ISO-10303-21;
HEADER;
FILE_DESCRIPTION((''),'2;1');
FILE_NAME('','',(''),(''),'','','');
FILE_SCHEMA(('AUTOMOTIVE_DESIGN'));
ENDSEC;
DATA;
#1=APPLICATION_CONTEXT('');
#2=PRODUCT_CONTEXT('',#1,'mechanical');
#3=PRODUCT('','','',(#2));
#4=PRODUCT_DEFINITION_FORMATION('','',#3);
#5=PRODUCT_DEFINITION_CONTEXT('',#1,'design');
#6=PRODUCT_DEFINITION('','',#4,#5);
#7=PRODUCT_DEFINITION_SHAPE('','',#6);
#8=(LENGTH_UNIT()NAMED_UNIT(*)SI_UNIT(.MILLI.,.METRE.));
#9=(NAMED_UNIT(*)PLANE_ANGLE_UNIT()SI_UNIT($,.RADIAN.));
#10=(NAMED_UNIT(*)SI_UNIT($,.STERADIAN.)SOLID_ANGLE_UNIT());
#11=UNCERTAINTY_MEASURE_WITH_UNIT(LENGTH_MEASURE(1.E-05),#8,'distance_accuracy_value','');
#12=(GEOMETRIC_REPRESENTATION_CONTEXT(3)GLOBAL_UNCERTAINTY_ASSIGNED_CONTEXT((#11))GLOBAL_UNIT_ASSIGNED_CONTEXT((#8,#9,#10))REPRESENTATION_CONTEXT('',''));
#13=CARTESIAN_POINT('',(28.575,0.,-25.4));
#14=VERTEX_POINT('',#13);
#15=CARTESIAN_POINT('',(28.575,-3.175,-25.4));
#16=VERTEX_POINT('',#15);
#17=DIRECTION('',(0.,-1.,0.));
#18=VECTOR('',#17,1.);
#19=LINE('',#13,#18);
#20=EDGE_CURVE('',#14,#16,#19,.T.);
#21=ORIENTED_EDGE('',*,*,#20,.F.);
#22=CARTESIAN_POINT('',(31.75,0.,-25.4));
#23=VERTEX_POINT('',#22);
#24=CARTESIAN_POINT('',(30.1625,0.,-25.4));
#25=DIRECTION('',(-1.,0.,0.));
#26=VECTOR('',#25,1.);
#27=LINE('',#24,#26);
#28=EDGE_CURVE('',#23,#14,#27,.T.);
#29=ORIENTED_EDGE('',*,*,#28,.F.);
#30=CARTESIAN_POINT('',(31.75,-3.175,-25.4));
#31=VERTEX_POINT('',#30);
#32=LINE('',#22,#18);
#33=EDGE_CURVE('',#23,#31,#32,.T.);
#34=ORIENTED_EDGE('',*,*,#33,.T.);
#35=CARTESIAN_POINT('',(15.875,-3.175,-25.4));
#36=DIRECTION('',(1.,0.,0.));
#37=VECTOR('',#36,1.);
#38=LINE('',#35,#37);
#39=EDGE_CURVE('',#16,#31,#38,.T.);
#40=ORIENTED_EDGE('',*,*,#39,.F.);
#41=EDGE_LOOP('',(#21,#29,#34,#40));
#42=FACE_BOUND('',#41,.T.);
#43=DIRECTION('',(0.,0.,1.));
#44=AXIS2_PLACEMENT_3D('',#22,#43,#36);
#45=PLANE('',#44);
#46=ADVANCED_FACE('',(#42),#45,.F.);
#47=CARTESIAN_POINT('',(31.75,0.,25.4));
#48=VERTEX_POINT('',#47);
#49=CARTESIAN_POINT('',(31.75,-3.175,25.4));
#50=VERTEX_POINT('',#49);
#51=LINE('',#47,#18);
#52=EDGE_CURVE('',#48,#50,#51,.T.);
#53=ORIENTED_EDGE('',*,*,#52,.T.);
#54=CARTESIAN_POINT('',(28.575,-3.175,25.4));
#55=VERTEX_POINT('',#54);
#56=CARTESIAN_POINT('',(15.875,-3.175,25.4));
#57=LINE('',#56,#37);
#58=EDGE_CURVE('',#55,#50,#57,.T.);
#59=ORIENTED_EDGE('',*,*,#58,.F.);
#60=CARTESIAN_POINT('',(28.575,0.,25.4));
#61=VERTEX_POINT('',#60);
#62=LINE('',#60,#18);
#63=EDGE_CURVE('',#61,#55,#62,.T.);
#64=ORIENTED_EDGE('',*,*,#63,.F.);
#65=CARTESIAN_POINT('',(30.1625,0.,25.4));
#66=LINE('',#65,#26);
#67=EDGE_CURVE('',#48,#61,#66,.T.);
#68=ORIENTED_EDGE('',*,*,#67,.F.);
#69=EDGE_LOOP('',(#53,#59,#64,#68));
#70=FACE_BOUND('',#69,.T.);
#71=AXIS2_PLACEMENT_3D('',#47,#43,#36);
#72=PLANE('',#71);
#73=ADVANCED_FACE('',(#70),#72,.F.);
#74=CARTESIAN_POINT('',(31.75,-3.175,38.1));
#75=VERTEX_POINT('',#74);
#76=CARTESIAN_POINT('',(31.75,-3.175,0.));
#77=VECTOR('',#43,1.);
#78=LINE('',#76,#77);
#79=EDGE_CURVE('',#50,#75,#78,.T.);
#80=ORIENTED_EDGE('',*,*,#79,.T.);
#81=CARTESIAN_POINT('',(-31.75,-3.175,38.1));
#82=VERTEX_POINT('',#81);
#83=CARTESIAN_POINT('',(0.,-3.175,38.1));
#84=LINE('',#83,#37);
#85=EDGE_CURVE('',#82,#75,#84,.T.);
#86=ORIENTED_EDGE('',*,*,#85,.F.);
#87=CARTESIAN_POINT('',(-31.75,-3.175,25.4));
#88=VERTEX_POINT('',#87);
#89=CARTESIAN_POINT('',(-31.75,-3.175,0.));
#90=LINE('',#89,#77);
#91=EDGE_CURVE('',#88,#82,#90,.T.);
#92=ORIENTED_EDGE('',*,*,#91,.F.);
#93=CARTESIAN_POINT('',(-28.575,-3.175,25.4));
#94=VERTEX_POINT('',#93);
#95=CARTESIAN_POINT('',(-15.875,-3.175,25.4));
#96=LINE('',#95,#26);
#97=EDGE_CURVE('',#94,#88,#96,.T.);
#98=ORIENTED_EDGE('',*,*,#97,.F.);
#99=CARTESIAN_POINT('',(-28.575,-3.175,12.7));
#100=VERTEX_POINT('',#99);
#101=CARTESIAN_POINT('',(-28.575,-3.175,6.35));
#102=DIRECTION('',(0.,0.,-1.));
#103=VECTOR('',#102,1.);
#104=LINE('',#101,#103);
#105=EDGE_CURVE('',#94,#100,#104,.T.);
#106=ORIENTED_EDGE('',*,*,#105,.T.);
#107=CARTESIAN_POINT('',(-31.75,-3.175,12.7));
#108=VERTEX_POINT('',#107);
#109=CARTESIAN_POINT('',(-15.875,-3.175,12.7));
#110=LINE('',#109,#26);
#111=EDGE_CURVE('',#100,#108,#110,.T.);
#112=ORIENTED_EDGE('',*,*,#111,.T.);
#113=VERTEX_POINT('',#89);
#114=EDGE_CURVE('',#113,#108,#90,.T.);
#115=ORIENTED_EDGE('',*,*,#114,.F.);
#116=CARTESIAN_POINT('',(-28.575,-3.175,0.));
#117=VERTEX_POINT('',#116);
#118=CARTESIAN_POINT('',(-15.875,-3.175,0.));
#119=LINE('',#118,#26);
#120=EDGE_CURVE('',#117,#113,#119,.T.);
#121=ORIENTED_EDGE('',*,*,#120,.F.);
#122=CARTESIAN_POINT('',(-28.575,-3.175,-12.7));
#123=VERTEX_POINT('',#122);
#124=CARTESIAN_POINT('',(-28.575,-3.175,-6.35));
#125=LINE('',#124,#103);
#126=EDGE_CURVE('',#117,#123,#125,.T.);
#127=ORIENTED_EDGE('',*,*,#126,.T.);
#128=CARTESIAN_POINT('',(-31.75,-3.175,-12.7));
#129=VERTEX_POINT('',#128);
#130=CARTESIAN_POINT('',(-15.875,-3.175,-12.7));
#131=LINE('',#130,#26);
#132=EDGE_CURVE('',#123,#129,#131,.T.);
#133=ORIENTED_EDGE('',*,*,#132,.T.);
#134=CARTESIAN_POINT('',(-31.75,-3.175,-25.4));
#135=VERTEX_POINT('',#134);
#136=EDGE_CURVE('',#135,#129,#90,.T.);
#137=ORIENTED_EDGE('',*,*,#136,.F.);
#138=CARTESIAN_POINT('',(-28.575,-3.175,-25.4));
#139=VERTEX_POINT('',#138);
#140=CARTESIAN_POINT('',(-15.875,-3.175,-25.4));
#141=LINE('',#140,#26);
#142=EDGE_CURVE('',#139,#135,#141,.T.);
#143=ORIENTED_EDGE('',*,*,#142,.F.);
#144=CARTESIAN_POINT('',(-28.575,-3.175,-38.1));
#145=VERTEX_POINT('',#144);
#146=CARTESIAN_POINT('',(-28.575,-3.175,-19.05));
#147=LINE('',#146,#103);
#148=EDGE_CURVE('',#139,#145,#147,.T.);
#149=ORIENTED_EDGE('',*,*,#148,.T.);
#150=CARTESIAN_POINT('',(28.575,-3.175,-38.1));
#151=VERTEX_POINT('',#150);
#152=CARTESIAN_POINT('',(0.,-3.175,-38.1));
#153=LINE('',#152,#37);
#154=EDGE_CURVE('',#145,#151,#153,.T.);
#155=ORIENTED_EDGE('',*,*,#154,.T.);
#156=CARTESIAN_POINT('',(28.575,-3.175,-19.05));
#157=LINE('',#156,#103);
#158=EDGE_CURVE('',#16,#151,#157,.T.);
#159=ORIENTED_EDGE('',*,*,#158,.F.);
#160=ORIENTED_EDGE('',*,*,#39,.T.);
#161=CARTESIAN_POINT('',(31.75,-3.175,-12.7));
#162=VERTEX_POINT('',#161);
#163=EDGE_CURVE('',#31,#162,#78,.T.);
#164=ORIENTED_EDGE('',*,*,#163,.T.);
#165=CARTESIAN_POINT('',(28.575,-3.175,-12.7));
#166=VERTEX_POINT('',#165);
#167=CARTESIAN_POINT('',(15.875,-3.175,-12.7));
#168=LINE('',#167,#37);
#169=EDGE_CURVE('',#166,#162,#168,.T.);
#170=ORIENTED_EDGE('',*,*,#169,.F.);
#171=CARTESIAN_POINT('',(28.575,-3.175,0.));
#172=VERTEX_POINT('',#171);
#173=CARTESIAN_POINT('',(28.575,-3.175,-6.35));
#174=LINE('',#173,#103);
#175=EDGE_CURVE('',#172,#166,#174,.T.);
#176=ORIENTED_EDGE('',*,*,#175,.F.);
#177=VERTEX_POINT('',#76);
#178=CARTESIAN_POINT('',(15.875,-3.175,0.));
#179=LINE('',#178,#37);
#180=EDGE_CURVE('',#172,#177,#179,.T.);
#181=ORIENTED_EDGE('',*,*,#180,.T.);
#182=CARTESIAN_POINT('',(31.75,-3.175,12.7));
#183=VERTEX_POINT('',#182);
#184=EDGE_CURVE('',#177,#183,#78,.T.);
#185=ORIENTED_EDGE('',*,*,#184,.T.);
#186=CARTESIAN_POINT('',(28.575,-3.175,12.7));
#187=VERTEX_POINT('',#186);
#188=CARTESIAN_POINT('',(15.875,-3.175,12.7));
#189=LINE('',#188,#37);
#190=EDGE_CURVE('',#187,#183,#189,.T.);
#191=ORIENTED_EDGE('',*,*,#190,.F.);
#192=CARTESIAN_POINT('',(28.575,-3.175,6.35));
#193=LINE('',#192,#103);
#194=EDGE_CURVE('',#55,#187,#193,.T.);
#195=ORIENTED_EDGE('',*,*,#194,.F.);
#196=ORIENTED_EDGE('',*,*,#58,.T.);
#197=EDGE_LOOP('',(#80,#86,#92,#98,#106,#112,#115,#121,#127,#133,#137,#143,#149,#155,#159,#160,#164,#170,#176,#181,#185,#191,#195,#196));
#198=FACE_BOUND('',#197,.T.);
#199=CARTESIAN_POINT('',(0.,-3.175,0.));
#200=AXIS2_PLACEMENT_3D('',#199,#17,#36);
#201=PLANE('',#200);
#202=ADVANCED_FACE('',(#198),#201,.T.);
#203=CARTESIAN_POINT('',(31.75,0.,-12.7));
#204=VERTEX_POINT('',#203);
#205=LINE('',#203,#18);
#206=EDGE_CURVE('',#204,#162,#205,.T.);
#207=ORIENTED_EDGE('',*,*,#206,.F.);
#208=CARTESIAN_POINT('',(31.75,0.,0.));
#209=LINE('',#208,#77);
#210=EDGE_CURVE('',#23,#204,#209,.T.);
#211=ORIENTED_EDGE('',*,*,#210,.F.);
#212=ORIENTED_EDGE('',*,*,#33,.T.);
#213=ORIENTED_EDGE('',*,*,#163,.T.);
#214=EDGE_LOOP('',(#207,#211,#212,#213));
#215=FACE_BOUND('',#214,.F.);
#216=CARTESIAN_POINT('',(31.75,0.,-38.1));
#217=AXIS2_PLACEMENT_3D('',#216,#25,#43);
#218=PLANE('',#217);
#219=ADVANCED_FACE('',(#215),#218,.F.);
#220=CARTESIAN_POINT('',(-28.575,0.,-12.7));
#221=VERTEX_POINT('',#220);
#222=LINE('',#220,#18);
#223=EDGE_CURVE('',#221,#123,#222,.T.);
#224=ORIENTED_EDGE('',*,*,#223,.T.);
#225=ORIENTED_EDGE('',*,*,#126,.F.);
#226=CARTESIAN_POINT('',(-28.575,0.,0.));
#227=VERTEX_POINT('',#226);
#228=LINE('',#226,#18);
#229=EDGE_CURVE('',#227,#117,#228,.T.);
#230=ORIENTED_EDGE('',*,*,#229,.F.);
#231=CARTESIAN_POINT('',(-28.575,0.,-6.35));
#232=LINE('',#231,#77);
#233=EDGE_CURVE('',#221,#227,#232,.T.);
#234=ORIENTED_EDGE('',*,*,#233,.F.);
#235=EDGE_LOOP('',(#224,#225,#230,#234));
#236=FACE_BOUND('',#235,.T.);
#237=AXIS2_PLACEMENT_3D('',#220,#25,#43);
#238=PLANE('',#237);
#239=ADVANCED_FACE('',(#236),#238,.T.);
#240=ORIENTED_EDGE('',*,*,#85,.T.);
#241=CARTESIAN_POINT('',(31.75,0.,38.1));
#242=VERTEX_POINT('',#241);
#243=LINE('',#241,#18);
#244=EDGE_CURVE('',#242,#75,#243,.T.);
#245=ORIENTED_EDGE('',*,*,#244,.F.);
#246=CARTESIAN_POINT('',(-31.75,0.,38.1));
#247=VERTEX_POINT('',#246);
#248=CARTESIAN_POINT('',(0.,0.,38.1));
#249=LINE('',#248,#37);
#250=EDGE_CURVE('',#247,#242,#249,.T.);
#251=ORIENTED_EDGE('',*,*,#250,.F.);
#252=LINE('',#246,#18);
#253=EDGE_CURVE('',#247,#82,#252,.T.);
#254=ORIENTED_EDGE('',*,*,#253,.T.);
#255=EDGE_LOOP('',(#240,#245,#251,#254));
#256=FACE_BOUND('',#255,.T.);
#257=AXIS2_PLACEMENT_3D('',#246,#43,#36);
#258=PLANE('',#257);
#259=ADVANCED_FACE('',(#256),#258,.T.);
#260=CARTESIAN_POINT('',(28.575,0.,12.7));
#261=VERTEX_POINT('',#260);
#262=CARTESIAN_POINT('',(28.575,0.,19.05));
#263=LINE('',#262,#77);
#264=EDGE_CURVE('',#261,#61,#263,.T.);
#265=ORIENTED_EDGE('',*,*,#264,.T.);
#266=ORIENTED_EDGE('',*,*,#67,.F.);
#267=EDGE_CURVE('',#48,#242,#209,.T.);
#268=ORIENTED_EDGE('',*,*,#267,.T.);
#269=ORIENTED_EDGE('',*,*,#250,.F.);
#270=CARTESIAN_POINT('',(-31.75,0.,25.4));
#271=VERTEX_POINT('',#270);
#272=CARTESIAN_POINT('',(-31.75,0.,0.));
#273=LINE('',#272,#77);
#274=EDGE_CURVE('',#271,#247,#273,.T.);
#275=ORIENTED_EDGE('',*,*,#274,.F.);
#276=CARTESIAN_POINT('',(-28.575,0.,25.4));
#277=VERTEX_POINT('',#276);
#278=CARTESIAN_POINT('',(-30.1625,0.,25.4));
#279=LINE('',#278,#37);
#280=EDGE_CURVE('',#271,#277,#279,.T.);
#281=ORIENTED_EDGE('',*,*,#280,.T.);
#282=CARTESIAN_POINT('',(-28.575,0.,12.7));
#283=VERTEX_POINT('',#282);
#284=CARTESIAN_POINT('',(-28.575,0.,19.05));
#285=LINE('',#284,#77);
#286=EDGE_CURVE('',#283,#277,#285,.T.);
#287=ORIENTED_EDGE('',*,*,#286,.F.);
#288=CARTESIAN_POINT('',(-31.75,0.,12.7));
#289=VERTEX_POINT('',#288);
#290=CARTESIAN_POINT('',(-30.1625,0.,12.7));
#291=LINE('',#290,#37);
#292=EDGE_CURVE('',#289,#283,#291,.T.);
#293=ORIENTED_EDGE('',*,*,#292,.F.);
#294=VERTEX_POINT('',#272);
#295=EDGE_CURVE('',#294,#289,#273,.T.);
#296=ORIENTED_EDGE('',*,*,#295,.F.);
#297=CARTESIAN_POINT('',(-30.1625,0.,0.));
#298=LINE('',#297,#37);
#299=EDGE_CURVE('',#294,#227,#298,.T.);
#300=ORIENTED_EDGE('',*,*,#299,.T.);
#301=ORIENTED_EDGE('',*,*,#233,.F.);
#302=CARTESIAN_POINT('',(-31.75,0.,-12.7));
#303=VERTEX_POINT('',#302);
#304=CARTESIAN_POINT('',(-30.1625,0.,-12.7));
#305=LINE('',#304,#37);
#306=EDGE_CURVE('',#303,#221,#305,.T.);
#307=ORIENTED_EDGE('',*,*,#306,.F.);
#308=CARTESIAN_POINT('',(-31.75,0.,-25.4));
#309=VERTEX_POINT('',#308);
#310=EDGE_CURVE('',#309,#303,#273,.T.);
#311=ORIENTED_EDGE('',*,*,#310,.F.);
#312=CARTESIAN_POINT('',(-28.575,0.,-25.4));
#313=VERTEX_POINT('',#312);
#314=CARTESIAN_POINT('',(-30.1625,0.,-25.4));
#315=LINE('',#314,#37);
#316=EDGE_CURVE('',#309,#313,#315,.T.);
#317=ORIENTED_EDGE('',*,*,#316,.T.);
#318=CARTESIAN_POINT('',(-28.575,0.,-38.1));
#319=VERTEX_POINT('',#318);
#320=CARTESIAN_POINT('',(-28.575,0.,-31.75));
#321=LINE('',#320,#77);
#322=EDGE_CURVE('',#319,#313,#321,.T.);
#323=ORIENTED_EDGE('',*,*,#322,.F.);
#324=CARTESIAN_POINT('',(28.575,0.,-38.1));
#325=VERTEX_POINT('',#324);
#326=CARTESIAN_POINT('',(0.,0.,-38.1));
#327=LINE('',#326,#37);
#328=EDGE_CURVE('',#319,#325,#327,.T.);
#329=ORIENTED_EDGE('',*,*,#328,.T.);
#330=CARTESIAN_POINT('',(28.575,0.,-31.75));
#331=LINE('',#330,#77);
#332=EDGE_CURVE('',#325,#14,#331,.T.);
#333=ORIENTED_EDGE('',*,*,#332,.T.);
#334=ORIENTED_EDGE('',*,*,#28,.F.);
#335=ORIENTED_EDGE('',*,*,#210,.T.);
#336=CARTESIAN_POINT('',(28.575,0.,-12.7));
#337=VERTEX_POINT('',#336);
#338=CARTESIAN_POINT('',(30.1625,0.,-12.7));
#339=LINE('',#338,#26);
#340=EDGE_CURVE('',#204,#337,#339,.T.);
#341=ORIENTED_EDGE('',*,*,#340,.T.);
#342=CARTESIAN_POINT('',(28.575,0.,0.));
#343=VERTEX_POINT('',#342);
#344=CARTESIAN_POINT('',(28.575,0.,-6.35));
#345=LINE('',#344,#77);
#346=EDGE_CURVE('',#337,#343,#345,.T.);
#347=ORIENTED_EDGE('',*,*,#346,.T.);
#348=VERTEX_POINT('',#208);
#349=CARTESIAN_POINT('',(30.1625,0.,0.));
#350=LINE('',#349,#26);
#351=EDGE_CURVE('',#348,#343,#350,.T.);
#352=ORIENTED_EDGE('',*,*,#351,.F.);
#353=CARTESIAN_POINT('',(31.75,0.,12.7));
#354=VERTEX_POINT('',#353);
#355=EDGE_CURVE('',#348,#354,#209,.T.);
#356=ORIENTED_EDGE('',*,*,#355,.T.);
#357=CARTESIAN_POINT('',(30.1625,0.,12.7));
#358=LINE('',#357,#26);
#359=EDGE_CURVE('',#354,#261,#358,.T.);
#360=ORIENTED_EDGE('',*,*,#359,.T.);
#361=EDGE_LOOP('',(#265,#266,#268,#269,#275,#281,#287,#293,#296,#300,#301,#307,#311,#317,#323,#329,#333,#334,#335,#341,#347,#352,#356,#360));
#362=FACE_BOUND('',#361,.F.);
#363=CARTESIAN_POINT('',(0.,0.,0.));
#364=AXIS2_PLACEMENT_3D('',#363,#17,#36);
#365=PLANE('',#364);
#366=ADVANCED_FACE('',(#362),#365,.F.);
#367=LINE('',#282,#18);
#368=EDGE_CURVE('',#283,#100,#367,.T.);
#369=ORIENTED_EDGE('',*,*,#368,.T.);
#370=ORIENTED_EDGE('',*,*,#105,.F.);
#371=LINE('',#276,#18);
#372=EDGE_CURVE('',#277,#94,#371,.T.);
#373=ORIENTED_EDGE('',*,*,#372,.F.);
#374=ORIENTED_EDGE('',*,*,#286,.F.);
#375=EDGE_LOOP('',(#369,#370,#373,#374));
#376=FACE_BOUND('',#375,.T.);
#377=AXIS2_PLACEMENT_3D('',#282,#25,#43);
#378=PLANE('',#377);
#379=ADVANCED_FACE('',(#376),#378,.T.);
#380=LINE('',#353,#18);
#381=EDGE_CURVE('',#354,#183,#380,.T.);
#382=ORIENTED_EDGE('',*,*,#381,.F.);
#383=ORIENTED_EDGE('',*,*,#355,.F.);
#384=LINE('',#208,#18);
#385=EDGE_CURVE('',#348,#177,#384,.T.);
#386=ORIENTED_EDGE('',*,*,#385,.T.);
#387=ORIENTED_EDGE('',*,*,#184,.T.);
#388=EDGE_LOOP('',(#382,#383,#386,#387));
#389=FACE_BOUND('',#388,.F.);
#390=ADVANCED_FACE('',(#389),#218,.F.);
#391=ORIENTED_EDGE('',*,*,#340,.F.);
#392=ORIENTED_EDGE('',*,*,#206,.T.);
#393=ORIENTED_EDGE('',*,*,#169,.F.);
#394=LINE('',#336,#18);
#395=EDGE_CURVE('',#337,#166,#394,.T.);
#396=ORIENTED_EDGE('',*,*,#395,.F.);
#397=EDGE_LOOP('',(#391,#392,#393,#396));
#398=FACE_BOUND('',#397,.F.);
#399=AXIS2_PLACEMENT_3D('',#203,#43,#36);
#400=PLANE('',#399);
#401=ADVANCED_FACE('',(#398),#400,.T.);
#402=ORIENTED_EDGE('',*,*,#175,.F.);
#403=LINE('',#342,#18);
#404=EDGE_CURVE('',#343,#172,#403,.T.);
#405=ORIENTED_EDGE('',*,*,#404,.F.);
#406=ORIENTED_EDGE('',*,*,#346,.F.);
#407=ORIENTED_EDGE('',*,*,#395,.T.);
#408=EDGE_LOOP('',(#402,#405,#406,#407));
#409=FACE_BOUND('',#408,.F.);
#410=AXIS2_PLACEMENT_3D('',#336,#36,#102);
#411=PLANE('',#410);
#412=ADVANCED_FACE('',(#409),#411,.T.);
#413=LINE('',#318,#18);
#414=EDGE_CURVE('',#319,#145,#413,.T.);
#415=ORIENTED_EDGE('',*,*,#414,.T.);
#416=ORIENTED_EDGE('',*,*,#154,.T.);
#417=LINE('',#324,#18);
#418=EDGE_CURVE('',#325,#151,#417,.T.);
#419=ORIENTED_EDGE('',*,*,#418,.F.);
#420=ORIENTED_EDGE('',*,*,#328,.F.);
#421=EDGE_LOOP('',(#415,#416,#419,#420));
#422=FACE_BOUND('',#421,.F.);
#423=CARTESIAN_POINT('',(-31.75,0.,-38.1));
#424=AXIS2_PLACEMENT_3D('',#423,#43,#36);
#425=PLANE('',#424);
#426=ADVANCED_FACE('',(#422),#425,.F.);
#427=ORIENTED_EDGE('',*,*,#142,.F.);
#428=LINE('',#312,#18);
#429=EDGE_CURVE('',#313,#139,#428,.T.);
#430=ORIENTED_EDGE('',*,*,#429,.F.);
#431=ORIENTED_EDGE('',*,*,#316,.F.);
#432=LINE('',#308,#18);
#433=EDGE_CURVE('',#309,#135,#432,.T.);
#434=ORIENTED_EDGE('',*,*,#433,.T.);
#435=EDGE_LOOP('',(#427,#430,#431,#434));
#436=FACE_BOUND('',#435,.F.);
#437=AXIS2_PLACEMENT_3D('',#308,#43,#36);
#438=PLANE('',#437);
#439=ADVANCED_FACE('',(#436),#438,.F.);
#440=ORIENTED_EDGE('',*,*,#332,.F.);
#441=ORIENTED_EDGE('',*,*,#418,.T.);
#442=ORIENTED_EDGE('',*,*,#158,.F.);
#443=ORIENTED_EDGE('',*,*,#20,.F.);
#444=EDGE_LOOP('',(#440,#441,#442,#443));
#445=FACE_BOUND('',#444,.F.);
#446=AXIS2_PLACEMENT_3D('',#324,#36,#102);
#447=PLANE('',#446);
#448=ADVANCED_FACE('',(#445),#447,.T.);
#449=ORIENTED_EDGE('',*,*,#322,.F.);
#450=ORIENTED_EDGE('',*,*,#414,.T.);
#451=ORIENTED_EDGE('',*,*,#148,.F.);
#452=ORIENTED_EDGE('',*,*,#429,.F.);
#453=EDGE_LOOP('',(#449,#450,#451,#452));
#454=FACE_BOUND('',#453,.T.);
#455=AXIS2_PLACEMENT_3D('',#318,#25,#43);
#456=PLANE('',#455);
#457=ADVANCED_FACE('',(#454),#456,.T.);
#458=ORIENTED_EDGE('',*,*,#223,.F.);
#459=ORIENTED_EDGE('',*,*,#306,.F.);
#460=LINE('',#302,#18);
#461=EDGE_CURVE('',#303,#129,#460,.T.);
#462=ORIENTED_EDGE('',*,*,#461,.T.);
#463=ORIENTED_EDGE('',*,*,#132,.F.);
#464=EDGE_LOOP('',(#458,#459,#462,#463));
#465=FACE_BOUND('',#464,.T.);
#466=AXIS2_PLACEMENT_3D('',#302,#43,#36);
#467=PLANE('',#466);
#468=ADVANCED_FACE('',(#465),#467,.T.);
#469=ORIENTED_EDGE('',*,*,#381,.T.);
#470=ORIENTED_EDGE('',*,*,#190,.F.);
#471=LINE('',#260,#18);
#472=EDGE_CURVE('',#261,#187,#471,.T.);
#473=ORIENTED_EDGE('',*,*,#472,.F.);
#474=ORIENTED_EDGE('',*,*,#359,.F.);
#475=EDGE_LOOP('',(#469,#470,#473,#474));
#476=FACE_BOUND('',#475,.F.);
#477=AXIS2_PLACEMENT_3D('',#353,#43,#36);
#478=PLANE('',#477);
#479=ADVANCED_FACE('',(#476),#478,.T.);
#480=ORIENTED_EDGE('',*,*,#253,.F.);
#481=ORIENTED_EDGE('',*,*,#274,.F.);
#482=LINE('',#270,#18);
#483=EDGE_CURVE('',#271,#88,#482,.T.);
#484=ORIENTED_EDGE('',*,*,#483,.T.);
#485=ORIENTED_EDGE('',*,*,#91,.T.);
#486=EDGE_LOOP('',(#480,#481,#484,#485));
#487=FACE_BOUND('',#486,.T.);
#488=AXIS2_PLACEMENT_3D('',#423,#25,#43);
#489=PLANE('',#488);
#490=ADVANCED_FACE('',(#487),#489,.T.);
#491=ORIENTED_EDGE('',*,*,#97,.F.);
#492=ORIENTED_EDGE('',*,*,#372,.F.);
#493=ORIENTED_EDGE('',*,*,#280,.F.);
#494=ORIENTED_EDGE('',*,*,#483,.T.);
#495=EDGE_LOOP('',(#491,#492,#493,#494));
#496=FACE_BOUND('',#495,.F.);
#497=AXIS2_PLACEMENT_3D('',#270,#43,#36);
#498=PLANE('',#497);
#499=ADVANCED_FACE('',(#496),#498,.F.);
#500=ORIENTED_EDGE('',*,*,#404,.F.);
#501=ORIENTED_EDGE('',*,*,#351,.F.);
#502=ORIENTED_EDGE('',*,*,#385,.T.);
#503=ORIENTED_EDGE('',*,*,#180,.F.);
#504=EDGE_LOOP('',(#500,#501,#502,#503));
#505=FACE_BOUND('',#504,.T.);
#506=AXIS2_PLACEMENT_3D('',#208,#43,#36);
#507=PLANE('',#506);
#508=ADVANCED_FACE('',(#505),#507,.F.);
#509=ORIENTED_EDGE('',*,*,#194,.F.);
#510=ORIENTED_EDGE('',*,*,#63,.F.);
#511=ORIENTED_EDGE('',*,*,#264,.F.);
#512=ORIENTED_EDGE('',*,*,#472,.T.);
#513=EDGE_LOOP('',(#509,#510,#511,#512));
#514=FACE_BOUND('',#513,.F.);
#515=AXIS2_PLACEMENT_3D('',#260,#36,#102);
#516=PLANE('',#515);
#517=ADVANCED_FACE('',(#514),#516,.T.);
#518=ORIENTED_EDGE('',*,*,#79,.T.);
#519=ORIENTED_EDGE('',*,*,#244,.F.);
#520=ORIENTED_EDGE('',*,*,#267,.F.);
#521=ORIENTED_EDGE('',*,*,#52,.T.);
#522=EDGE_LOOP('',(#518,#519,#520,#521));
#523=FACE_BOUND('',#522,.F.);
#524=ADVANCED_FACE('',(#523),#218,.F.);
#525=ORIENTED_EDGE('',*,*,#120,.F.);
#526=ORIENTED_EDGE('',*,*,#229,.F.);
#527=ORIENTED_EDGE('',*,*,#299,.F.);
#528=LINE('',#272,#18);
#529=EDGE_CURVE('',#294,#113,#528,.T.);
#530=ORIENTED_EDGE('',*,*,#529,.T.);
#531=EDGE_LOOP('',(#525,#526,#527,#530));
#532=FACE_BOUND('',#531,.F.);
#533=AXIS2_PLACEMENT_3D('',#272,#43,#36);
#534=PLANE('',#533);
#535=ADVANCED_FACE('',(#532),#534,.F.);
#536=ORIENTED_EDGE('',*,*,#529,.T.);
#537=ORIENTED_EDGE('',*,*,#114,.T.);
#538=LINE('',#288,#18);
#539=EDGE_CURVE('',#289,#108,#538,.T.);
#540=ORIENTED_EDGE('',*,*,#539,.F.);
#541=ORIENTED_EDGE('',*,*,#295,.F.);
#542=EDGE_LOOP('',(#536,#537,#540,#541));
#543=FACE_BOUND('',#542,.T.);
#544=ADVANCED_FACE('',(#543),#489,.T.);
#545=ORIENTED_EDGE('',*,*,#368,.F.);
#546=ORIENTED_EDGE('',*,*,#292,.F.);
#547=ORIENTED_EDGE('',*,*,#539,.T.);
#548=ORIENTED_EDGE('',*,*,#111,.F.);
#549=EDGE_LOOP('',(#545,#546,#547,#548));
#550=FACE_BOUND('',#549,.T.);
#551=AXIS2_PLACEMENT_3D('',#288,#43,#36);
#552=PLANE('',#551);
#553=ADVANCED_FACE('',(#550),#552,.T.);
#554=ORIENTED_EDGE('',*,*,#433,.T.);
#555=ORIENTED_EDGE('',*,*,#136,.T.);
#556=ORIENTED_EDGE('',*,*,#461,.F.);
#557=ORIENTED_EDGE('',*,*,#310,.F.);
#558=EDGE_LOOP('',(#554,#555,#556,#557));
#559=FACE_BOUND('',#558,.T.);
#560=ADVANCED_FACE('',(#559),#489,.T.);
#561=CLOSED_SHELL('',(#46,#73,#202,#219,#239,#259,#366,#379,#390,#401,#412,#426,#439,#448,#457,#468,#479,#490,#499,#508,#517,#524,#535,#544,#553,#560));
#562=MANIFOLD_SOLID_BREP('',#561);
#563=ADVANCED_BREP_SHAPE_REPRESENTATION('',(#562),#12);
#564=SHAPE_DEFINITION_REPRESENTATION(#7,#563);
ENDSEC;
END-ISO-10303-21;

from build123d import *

# Parameters (mm, degrees)
F0_W     = 63.5
F0_H     = 76.2
F1_DEPTH = 3.175
F2_W     = 3.175
F2_H     = 12.7
F3_DEPTH = 3.176


# Not quite as in the source:
# - a pattern or mirror of a feature is missing from the dataset's text; its kind, count and spacing are read off the source's solid


with BuildPart() as f1:
    # F0 (on Front) → F1 (new body)
    with BuildSketch(Plane.XZ):
        Rectangle(F0_W, F0_H)
    extrude(amount=F1_DEPTH)

    # F2 (on Front) → F3 (cut, through all)
    with BuildSketch(Plane.XZ):
        with Locations((-30.1625, 19.05)):
            Rectangle(F2_W, F2_H)
        with Locations((-30.1625, -6.35)):
            Rectangle(F2_W, F2_H)
        with Locations((-30.1625, -31.75)):
            Rectangle(F2_W, F2_H)
    f3 = extrude(amount=F3_DEPTH, mode=Mode.SUBTRACT)

    # F3_copies: F3 across plane
    add(f3.mirror(Plane(origin=(0, 0, 0), x_dir=(0, 0, 1), z_dir=(1, 0, 0))), mode=Mode.SUBTRACT)


solid = f1.part
